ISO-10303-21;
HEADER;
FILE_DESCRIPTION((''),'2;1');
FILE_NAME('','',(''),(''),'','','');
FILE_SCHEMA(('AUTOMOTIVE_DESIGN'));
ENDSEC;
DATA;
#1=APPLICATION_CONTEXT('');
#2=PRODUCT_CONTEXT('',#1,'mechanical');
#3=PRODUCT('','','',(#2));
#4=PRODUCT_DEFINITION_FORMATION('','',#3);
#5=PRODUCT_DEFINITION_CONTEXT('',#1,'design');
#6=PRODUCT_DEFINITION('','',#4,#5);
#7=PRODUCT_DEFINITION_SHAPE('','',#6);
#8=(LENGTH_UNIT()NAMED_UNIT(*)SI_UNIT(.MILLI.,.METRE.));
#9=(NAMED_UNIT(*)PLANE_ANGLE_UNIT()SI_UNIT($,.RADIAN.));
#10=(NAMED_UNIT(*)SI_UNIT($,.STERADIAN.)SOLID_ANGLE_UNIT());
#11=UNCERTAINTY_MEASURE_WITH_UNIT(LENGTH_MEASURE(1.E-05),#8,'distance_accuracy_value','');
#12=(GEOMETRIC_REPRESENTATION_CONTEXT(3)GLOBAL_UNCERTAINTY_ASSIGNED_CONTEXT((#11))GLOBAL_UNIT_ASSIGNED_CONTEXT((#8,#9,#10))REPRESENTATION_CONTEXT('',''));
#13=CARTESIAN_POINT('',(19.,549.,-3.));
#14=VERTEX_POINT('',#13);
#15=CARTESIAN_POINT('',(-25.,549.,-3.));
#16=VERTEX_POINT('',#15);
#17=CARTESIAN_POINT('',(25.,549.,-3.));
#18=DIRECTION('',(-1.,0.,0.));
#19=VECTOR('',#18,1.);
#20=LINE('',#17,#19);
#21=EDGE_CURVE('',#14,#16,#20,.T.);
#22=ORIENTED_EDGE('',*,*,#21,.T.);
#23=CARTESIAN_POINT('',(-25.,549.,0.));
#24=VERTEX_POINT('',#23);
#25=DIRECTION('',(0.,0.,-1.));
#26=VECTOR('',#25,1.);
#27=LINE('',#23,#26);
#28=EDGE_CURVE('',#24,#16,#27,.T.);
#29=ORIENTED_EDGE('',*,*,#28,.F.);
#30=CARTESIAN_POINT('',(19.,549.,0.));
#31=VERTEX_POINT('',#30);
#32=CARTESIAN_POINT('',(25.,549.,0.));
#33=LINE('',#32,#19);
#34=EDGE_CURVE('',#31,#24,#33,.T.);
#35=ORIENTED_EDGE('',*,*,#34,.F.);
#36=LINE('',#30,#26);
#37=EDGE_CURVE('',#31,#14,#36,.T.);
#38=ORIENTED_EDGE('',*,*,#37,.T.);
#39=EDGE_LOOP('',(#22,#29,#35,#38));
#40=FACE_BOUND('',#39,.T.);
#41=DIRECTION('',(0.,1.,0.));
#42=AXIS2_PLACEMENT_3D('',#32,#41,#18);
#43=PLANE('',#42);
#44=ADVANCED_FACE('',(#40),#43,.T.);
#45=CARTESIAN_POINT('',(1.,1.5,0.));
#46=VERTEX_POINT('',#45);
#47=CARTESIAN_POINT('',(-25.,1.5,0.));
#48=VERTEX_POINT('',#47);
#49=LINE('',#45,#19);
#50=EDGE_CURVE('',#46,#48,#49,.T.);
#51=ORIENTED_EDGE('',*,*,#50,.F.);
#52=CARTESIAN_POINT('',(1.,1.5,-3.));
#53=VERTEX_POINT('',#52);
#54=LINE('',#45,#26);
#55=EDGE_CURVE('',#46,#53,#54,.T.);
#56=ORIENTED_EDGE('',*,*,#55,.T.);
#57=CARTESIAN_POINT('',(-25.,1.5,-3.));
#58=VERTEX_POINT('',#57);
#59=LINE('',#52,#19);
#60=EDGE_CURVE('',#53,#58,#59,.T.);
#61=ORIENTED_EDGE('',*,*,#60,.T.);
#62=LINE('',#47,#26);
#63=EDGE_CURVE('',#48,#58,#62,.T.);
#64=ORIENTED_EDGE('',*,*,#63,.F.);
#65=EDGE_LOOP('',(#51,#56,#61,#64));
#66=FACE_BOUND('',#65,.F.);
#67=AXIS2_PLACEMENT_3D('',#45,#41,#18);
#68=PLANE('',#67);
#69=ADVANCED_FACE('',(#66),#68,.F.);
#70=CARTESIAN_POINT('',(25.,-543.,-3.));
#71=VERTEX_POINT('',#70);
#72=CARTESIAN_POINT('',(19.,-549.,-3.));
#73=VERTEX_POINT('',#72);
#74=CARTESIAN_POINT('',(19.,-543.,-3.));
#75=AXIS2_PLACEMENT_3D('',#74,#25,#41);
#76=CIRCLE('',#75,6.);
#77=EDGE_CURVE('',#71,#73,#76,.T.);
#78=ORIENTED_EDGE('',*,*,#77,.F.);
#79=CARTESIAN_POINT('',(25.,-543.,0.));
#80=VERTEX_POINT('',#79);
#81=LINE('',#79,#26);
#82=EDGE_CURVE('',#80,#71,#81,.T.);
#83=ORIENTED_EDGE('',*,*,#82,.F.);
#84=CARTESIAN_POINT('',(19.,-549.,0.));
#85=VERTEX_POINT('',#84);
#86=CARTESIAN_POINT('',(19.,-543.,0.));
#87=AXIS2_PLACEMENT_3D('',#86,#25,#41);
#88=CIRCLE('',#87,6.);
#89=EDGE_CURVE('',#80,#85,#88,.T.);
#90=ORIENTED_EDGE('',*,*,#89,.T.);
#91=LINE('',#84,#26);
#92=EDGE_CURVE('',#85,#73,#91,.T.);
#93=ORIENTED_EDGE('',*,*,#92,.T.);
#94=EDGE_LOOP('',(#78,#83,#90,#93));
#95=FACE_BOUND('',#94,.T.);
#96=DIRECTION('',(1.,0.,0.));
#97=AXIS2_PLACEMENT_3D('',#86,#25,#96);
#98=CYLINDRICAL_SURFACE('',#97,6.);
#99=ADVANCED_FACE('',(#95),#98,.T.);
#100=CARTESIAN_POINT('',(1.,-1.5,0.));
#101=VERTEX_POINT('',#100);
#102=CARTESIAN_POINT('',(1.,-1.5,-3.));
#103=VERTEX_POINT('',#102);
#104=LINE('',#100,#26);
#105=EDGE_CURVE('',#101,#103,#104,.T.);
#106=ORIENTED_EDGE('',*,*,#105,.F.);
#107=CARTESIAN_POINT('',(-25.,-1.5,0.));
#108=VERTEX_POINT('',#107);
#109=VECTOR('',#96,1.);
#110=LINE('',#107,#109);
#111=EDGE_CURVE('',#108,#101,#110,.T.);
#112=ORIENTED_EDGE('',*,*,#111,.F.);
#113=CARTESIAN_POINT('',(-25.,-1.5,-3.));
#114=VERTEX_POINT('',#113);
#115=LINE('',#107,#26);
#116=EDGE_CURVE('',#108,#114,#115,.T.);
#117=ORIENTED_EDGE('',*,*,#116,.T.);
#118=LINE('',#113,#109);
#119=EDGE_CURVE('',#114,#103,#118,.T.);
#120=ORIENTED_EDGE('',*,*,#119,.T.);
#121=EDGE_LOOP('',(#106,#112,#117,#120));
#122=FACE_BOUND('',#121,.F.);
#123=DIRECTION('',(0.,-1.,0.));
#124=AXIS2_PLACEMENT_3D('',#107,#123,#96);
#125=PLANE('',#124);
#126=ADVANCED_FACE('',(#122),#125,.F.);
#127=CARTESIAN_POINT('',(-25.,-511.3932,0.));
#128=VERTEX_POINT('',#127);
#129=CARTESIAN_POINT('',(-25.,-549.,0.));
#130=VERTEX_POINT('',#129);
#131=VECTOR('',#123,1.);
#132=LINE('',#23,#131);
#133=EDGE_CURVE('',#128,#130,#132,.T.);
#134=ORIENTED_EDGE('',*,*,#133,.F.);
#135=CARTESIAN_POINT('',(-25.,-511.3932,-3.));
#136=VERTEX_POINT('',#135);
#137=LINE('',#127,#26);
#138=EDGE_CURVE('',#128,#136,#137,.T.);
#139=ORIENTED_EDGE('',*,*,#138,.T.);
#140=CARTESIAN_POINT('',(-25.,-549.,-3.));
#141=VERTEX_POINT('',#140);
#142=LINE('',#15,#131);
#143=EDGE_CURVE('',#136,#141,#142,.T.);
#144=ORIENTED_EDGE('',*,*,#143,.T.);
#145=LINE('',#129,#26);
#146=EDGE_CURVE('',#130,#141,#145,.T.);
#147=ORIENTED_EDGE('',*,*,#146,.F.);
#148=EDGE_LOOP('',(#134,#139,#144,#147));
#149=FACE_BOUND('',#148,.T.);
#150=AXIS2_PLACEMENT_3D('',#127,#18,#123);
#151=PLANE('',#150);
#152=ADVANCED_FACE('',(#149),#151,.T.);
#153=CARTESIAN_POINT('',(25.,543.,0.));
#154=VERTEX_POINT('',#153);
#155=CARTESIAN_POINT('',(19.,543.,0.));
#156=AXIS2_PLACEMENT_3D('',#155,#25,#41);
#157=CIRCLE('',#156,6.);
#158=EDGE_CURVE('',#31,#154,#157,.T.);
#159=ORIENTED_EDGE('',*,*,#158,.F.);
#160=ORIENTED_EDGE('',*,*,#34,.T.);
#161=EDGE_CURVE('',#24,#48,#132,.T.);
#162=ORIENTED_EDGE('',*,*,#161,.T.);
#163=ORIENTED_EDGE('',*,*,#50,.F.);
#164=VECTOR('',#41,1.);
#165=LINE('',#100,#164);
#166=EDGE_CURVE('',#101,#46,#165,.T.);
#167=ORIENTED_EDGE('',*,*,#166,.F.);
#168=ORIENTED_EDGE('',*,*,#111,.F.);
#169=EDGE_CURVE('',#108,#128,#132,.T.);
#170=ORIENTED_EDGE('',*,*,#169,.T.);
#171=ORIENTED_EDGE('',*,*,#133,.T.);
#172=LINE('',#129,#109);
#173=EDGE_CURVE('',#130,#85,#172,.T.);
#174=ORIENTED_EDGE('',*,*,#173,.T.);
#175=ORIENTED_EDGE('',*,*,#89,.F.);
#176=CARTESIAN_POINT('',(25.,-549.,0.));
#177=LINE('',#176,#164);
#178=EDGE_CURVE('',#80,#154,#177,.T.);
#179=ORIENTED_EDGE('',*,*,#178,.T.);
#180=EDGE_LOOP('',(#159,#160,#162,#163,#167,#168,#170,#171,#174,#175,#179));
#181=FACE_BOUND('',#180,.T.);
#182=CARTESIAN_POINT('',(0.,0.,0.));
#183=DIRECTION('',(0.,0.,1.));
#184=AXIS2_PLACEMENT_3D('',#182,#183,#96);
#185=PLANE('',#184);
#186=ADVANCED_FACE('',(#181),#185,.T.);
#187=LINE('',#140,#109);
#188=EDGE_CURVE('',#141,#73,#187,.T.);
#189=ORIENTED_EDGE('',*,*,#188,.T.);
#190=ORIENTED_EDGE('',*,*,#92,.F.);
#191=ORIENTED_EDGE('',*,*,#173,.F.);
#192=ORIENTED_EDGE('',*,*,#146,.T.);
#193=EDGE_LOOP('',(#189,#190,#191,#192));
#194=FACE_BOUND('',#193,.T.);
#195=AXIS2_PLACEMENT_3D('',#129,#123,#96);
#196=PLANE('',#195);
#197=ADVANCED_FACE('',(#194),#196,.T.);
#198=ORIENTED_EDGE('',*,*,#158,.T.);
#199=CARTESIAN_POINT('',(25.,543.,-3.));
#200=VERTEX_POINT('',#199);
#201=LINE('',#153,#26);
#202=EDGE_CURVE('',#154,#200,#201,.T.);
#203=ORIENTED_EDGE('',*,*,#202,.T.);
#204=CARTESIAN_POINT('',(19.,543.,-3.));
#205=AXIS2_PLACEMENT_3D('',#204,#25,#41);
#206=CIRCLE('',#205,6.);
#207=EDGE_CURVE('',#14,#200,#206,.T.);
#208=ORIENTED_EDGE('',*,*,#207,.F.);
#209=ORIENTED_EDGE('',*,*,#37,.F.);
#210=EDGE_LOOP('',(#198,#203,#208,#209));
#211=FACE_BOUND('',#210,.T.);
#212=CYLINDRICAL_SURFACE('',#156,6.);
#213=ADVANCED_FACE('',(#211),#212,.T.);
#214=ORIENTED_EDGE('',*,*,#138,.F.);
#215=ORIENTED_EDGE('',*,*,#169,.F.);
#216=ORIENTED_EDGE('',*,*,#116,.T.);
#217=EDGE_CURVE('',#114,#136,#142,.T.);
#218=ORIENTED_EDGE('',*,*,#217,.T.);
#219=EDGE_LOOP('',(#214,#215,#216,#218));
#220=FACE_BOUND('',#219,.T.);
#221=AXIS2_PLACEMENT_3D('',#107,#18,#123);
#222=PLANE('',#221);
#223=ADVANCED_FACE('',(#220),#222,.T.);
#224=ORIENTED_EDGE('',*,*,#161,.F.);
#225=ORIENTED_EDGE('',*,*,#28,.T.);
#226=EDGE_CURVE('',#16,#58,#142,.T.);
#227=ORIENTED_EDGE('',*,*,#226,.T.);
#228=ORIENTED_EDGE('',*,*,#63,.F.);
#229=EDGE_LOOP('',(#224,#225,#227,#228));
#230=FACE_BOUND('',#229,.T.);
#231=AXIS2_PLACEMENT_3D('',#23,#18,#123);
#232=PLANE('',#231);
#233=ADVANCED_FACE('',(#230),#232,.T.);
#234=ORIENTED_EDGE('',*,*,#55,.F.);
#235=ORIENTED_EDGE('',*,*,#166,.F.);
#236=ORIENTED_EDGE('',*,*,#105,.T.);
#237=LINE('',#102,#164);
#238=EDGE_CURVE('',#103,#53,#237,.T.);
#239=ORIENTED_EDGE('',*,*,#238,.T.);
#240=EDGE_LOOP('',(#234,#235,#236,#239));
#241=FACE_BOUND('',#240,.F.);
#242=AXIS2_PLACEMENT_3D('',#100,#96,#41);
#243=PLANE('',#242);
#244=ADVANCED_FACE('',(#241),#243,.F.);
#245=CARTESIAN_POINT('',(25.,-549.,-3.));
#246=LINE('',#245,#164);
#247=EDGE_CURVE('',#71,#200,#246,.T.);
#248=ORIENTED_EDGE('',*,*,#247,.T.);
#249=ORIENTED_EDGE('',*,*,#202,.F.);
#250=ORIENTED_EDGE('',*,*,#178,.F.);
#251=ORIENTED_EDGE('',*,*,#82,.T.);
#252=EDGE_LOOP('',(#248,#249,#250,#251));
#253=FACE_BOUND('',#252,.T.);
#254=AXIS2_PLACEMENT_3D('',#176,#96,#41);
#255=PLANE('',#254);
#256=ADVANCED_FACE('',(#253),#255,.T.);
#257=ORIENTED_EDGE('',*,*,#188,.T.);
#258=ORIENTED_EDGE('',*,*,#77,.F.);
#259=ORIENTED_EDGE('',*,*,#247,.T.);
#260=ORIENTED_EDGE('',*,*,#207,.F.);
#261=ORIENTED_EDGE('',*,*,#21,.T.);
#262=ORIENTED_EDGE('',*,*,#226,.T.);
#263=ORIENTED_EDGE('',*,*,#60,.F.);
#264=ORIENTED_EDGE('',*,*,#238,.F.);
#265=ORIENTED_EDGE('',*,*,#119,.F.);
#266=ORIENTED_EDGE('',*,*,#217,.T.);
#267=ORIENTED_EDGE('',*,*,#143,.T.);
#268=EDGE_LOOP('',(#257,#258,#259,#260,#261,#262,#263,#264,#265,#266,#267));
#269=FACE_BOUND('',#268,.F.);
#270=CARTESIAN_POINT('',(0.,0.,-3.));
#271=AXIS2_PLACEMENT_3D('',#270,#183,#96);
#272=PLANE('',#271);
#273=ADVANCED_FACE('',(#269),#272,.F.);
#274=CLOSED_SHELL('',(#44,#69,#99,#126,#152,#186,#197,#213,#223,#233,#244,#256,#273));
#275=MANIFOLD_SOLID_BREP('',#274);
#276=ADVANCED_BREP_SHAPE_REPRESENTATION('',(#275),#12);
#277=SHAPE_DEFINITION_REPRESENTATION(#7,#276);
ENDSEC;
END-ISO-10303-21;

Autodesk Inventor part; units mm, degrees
ref_plane "YZ Plane" through (0, 0, 0) normal (1, 0, 0) x (0, 1, 0)
ref_plane "XZ Plane" through (0, 0, 0) normal (0, 1, 0) x (-1, 0, 0)
ref_plane "XY Plane" through (0, 0, 0) normal (0, 0, 1) x (1, 0, 0)
sketch "Sketch1" plane through (0, 0, 0) normal (0, 0, 1) x (1, 0, 0)
  line L0 (-25, -549) -> (25, -549)
  line L1 (25, -549) -> (25, 549)
  line L2 (25, 549) -> (-25, 549)
  line L3 (-25, 549) -> (-25, -549)
  line L4 (-25, -549) -> (-25, -511.3932)
  line L5 (-25, -549) -> (25, 549) construction
  line L6 (-25, -1.5) -> (1, -1.5)
  line L7 (1, -1.5) -> (1, 1.5)
  line L8 (1, 1.5) -> (-25, 1.5)
  line L9 (-25, 1.5) -> (-25, -1.5)
  point P0 (0, 0)
  point P1 (0, 0)
  point P2 (-25, 0)
  dimension "d17" = 1098
  dimension "d18" = 50
  dimension "d19" = 3
  dimension "d20" = 26
extrude "Plate2" add sketch "Sketch1" against normal blind 3 contours L3 L6 L7 L8 L2 L1 L0
fillet "Corner Round2" radius 6 2 edges at (25, -549, -1.5) (25, 549, -1.5)
equation "\"d18\" = Ширина_креста"
equation "\"d19\" = Thickness"
equation "\"d15\" = Thickness"
equation "\"BendReliefWidth\" = Thickness"
equation "\"BendReliefDepth\" = 0.5 * Thickness"
equation "\"CornerReliefSize\" = 4 * Thickness"
equation "\"MinimumRemnant\" = 2 * Thickness"
equation "\"TransitionRadius\" = BendRadius"
equation "\"JacobiRadiusSize\" = BendRadius"
equation "\"GapSize\" = Thickness"
equation "\"Ширина_креста\" = 50"
equation "\"Thickness\" = 3"
equation "\"BendRadius\" = 5"
properties part number "BSH 506 amplifier" material "Stainless Steel"
